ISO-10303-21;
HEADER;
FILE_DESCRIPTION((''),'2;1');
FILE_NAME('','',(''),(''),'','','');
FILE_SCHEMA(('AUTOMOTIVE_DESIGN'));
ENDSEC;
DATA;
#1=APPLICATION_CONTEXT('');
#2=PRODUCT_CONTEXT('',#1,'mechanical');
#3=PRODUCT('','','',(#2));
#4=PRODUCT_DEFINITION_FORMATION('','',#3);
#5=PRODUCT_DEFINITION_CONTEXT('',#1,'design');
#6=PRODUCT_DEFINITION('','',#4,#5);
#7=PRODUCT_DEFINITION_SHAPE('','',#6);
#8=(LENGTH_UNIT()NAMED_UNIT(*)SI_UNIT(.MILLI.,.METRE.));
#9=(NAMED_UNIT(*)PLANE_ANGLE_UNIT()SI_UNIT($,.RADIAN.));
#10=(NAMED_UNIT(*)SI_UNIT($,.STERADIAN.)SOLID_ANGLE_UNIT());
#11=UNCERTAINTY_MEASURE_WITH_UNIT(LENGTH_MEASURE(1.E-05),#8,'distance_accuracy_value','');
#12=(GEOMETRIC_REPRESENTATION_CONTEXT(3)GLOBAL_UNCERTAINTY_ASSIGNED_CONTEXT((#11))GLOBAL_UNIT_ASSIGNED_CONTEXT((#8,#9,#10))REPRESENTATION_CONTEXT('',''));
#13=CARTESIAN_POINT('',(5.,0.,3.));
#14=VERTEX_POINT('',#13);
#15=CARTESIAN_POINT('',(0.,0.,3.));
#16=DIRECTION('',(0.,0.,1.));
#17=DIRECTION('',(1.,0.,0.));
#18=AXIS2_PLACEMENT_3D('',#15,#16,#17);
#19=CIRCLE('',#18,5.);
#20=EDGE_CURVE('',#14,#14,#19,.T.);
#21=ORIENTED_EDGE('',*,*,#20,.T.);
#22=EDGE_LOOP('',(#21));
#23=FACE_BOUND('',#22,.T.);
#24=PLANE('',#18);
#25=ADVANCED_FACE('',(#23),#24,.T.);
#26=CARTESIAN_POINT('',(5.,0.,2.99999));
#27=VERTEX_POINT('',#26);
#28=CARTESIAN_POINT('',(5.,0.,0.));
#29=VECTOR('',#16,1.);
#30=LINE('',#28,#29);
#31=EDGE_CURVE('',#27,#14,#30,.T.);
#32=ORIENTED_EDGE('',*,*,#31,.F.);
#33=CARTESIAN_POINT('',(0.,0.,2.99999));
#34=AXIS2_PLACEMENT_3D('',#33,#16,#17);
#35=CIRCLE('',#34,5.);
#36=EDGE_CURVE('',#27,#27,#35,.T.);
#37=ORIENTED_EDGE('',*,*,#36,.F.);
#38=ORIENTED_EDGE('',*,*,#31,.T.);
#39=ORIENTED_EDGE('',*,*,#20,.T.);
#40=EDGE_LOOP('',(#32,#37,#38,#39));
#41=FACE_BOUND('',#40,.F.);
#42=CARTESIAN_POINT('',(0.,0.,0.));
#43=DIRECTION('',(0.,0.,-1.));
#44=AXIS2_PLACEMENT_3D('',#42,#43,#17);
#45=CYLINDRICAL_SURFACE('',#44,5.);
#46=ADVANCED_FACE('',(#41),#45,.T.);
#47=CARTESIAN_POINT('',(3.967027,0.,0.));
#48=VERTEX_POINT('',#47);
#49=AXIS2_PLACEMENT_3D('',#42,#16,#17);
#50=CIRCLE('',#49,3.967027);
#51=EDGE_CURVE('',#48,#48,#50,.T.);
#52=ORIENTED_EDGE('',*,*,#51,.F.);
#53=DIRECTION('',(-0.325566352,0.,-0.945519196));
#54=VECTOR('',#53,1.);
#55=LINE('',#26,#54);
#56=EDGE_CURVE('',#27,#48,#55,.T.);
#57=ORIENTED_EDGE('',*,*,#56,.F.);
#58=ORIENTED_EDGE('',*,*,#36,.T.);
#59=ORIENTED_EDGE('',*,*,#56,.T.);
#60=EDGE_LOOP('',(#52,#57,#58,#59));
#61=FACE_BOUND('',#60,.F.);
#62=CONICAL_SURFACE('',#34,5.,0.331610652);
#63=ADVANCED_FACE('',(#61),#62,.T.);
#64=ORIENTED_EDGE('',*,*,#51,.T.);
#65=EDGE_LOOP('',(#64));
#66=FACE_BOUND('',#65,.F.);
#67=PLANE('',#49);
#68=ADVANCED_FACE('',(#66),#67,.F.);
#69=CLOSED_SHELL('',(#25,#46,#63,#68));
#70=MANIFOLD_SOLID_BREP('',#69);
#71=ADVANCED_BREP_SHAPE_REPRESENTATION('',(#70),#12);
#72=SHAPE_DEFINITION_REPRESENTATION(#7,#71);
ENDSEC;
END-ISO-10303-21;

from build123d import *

# Parameters (mm, degrees)
F0_R     = 5
F1_DEPTH = 3
F2_SIZE2 = 1.032973
F2_SIZE  = 2.99999


# Not quite as in the source:
# - a fillet or chamfer is up to 0.001 mm smaller than in the source, because OpenCascade refuses the exact size


with BuildPart() as f1:
    # F0 (on Top) → F1 (new body)
    with BuildSketch(Plane.XY):
        Circle(F0_R)
    extrude(amount=F1_DEPTH)

    # F2 (size 3 and 1.0329828399 in the source; OpenCascade refuses exactly that, so slightly less here)
    f2_edges = [f1.edges().sort_by_distance(p)[0] for p in [
        (-5, 0, 0),
    ]]
    f2_side = f1.faces().sort_by_distance((-5, 0, 1.5))[0]
    chamfer(f2_edges, length=F2_SIZE, length2=F2_SIZE2, reference=f2_side)


solid = f1.part
